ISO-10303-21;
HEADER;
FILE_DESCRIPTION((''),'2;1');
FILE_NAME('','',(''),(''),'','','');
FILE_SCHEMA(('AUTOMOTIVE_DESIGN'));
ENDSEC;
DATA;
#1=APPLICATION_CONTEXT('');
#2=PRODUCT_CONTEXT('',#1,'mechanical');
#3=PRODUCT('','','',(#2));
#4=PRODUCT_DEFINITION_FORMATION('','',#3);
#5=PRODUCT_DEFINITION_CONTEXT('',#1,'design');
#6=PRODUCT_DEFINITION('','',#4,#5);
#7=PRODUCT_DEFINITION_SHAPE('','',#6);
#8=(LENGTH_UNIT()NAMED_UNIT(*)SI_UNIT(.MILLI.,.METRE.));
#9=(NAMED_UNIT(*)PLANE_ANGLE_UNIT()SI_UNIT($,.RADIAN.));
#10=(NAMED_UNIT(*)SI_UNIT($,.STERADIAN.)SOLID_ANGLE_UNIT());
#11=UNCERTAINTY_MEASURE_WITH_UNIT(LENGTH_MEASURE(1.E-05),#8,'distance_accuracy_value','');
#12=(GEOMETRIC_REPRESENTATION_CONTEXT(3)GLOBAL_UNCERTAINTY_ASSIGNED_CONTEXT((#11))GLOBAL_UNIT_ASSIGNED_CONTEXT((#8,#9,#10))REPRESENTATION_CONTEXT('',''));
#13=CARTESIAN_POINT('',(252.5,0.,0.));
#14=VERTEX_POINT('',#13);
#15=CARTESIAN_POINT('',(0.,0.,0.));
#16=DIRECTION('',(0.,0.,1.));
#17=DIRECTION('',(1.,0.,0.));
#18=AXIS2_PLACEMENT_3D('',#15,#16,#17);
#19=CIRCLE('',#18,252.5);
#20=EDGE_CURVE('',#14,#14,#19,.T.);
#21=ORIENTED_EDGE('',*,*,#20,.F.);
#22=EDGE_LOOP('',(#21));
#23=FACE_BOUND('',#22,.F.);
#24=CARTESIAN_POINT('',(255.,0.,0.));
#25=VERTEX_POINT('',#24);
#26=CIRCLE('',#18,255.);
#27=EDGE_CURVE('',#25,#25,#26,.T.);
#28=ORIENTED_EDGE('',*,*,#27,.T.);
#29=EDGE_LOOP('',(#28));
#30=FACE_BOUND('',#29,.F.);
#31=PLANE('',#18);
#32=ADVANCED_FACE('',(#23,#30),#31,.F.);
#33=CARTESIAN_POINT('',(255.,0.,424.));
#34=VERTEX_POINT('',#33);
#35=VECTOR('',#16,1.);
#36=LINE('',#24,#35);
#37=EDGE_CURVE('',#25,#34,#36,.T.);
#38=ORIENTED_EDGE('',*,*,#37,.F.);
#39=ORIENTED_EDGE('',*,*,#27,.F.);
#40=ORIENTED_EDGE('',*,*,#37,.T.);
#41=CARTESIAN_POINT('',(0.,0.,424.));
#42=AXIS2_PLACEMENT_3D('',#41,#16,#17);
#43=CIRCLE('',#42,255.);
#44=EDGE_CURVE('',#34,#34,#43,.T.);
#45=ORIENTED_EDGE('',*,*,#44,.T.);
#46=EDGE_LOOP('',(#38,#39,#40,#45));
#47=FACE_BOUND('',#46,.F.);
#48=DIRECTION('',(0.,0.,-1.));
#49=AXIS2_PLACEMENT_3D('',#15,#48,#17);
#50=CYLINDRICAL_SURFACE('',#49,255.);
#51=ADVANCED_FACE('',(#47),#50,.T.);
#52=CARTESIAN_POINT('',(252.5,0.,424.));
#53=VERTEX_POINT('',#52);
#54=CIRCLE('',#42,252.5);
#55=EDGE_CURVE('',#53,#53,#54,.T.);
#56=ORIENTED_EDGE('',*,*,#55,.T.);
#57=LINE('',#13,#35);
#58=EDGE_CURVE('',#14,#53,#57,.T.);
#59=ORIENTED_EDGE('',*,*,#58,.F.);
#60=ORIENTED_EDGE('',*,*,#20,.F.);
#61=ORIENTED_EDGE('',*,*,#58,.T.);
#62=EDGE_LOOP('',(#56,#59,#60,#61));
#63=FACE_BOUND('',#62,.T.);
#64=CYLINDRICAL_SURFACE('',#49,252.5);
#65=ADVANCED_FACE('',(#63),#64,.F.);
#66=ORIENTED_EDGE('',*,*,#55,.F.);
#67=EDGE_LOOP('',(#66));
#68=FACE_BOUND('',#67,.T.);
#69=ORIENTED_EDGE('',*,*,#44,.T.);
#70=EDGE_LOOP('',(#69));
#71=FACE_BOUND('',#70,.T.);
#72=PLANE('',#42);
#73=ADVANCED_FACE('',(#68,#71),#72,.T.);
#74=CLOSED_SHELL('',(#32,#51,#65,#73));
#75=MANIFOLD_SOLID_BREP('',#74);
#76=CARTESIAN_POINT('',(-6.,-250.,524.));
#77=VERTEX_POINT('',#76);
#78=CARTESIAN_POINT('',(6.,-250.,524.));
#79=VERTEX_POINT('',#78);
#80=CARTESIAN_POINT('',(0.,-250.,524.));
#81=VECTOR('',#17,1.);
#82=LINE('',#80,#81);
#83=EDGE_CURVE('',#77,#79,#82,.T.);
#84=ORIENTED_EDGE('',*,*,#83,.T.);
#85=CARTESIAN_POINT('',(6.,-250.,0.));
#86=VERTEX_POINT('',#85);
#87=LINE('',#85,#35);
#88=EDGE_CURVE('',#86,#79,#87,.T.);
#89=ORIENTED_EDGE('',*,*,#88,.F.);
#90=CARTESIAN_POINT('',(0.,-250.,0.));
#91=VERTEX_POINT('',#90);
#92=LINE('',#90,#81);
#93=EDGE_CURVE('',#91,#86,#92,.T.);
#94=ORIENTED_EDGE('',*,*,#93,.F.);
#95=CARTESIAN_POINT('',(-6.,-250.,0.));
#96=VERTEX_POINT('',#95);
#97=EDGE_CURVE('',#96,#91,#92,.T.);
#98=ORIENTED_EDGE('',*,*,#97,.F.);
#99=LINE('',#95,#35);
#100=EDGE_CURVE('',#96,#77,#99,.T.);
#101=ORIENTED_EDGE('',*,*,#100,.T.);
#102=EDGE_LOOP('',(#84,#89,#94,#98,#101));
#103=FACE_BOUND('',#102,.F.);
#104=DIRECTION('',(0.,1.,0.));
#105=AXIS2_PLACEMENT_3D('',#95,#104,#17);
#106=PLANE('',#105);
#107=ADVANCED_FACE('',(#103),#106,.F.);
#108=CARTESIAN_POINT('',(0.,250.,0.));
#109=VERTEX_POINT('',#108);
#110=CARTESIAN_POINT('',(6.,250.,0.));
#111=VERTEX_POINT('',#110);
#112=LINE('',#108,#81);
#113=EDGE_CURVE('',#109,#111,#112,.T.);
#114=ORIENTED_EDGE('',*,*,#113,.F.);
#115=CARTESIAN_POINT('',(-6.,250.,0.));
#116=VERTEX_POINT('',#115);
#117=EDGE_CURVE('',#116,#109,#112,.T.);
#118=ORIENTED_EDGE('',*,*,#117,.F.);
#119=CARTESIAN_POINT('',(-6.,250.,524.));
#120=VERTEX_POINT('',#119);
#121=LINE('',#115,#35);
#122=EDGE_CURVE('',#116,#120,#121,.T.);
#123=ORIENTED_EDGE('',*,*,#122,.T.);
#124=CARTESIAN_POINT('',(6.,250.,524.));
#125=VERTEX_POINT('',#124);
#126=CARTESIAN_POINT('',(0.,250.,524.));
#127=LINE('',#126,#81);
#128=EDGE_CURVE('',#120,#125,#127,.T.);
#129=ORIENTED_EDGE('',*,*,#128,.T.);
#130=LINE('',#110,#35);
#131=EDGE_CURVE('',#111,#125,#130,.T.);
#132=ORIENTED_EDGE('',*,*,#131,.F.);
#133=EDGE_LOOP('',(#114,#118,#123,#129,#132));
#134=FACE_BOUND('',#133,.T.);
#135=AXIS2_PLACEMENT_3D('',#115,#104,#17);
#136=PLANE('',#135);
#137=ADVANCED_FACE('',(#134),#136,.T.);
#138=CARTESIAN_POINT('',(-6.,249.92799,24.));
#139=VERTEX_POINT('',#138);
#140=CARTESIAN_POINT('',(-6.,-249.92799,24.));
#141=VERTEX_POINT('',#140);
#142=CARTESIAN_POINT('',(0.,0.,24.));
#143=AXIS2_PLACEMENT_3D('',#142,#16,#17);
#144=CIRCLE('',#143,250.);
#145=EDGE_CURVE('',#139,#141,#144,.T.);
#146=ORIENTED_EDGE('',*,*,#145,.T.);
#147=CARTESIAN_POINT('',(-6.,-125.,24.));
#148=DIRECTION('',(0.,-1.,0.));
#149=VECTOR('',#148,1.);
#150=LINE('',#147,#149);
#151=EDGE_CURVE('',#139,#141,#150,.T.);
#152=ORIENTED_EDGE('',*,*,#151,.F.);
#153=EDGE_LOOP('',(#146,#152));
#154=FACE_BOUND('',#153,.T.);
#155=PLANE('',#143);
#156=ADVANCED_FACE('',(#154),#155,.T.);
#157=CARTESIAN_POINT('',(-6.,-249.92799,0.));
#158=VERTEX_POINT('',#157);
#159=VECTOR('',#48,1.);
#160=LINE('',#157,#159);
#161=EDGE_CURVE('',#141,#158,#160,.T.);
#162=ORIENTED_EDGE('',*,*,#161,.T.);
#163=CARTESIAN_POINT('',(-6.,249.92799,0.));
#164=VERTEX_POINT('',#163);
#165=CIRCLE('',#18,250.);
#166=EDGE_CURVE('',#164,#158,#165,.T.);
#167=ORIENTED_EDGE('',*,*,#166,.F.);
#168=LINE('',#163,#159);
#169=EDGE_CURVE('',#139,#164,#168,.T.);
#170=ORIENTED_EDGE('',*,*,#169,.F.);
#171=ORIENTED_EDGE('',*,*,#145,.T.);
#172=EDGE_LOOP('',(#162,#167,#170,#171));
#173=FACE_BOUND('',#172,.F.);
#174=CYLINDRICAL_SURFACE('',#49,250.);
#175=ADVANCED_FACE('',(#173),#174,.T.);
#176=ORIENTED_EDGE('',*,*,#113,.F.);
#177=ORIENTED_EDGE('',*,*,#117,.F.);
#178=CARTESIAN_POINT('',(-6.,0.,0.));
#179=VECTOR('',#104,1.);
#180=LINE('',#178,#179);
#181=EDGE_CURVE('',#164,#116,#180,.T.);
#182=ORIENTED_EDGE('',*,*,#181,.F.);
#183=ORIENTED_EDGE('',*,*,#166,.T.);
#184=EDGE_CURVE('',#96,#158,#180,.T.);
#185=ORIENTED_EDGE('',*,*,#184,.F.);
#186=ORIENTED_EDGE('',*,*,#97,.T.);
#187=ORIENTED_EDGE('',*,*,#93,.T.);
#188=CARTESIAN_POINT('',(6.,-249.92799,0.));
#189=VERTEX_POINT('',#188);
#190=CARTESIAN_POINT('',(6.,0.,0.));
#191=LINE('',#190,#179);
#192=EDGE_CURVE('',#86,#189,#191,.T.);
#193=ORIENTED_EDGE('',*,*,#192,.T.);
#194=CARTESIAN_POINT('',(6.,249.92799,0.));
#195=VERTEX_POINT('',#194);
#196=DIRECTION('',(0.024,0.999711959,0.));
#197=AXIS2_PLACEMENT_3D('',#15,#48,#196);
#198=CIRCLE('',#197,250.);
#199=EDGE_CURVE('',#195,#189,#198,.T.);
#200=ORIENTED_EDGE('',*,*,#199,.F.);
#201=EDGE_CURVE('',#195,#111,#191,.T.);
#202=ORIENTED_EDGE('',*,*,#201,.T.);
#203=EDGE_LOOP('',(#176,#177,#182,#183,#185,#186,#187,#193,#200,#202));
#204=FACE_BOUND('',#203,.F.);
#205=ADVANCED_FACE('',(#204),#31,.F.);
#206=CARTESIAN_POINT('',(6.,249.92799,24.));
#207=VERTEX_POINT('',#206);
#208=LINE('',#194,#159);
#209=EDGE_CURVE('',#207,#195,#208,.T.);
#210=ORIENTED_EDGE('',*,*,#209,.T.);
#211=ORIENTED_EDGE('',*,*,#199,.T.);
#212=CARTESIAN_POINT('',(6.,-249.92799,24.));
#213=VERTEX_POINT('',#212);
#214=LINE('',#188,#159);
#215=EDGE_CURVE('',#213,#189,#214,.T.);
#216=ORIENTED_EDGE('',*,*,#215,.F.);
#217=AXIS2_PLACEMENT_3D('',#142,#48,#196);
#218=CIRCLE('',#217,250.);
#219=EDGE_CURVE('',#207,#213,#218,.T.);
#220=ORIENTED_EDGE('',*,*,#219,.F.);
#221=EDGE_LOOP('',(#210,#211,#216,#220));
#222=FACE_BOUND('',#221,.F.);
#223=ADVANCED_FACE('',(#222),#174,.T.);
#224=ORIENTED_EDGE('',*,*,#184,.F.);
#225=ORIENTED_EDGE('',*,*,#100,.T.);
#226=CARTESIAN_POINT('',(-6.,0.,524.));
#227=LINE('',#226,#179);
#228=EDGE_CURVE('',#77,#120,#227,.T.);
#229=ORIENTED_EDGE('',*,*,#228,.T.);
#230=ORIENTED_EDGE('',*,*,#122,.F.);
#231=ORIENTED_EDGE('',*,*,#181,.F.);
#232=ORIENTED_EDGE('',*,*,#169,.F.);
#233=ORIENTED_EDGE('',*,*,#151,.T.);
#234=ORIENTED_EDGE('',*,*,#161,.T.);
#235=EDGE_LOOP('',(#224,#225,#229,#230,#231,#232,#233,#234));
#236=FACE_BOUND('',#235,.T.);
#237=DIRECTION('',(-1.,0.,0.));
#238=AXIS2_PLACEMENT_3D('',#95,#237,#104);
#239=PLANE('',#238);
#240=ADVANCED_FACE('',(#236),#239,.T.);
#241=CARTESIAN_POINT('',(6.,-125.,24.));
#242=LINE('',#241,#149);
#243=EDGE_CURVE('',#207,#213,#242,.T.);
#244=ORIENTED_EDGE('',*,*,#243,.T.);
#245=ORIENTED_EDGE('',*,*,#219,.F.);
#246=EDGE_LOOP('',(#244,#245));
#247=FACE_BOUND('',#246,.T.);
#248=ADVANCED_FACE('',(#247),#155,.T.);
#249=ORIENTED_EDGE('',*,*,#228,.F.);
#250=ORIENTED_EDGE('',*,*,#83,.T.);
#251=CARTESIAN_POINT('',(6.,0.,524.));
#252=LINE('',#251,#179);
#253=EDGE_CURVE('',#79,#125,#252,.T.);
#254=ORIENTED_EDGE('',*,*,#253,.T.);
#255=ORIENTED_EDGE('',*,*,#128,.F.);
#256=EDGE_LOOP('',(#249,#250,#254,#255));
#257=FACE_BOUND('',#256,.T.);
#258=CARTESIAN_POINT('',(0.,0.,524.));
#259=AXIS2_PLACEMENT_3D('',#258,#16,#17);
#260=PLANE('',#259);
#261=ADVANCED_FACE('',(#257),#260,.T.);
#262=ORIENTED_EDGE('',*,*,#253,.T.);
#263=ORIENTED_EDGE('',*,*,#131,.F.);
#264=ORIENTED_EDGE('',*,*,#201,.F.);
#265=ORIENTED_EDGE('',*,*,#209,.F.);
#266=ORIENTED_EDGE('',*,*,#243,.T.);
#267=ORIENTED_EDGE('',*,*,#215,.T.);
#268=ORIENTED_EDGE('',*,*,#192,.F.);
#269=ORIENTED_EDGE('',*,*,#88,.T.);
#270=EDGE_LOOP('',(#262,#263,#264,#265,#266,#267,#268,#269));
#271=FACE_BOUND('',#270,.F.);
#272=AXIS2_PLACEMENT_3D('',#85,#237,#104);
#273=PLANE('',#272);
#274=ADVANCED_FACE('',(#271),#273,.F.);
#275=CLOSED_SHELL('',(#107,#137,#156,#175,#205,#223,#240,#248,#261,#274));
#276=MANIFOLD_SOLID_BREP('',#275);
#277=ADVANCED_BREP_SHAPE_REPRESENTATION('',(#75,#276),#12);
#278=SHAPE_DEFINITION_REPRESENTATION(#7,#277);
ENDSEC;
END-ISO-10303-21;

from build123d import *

# Parameters (mm, degrees)
F0_R     = 250
F1_DEPTH = 24
F2_W     = 12
F2_H     = 500
F3_DEPTH = 524
F6_R     = 255
F6_R_2   = 252.5
F7_DEPTH = 424


# Not quite as in the source:
# - the program builds the solid bodies; features that only make, move or delete a surface that nothing else refers to are left out


with BuildPart() as f1:
    # F0 (on Top) → F1 (new body)
    with BuildSketch(Plane.XY):
        Circle(F0_R)
    extrude(amount=F1_DEPTH)

    # F2 (on Top) → F3 (join)
    with BuildSketch(Plane.XY):
        Rectangle(F2_W, F2_H)
    extrude(amount=F3_DEPTH)


with BuildPart() as f7:
    # F6 (on Top) → F7 (new body)
    with BuildSketch(Plane.XY):
        Circle(F6_R)
        Circle(F6_R_2, mode=Mode.SUBTRACT)
    extrude(amount=F7_DEPTH)


solid = Compound([f1.part, f7.part])
